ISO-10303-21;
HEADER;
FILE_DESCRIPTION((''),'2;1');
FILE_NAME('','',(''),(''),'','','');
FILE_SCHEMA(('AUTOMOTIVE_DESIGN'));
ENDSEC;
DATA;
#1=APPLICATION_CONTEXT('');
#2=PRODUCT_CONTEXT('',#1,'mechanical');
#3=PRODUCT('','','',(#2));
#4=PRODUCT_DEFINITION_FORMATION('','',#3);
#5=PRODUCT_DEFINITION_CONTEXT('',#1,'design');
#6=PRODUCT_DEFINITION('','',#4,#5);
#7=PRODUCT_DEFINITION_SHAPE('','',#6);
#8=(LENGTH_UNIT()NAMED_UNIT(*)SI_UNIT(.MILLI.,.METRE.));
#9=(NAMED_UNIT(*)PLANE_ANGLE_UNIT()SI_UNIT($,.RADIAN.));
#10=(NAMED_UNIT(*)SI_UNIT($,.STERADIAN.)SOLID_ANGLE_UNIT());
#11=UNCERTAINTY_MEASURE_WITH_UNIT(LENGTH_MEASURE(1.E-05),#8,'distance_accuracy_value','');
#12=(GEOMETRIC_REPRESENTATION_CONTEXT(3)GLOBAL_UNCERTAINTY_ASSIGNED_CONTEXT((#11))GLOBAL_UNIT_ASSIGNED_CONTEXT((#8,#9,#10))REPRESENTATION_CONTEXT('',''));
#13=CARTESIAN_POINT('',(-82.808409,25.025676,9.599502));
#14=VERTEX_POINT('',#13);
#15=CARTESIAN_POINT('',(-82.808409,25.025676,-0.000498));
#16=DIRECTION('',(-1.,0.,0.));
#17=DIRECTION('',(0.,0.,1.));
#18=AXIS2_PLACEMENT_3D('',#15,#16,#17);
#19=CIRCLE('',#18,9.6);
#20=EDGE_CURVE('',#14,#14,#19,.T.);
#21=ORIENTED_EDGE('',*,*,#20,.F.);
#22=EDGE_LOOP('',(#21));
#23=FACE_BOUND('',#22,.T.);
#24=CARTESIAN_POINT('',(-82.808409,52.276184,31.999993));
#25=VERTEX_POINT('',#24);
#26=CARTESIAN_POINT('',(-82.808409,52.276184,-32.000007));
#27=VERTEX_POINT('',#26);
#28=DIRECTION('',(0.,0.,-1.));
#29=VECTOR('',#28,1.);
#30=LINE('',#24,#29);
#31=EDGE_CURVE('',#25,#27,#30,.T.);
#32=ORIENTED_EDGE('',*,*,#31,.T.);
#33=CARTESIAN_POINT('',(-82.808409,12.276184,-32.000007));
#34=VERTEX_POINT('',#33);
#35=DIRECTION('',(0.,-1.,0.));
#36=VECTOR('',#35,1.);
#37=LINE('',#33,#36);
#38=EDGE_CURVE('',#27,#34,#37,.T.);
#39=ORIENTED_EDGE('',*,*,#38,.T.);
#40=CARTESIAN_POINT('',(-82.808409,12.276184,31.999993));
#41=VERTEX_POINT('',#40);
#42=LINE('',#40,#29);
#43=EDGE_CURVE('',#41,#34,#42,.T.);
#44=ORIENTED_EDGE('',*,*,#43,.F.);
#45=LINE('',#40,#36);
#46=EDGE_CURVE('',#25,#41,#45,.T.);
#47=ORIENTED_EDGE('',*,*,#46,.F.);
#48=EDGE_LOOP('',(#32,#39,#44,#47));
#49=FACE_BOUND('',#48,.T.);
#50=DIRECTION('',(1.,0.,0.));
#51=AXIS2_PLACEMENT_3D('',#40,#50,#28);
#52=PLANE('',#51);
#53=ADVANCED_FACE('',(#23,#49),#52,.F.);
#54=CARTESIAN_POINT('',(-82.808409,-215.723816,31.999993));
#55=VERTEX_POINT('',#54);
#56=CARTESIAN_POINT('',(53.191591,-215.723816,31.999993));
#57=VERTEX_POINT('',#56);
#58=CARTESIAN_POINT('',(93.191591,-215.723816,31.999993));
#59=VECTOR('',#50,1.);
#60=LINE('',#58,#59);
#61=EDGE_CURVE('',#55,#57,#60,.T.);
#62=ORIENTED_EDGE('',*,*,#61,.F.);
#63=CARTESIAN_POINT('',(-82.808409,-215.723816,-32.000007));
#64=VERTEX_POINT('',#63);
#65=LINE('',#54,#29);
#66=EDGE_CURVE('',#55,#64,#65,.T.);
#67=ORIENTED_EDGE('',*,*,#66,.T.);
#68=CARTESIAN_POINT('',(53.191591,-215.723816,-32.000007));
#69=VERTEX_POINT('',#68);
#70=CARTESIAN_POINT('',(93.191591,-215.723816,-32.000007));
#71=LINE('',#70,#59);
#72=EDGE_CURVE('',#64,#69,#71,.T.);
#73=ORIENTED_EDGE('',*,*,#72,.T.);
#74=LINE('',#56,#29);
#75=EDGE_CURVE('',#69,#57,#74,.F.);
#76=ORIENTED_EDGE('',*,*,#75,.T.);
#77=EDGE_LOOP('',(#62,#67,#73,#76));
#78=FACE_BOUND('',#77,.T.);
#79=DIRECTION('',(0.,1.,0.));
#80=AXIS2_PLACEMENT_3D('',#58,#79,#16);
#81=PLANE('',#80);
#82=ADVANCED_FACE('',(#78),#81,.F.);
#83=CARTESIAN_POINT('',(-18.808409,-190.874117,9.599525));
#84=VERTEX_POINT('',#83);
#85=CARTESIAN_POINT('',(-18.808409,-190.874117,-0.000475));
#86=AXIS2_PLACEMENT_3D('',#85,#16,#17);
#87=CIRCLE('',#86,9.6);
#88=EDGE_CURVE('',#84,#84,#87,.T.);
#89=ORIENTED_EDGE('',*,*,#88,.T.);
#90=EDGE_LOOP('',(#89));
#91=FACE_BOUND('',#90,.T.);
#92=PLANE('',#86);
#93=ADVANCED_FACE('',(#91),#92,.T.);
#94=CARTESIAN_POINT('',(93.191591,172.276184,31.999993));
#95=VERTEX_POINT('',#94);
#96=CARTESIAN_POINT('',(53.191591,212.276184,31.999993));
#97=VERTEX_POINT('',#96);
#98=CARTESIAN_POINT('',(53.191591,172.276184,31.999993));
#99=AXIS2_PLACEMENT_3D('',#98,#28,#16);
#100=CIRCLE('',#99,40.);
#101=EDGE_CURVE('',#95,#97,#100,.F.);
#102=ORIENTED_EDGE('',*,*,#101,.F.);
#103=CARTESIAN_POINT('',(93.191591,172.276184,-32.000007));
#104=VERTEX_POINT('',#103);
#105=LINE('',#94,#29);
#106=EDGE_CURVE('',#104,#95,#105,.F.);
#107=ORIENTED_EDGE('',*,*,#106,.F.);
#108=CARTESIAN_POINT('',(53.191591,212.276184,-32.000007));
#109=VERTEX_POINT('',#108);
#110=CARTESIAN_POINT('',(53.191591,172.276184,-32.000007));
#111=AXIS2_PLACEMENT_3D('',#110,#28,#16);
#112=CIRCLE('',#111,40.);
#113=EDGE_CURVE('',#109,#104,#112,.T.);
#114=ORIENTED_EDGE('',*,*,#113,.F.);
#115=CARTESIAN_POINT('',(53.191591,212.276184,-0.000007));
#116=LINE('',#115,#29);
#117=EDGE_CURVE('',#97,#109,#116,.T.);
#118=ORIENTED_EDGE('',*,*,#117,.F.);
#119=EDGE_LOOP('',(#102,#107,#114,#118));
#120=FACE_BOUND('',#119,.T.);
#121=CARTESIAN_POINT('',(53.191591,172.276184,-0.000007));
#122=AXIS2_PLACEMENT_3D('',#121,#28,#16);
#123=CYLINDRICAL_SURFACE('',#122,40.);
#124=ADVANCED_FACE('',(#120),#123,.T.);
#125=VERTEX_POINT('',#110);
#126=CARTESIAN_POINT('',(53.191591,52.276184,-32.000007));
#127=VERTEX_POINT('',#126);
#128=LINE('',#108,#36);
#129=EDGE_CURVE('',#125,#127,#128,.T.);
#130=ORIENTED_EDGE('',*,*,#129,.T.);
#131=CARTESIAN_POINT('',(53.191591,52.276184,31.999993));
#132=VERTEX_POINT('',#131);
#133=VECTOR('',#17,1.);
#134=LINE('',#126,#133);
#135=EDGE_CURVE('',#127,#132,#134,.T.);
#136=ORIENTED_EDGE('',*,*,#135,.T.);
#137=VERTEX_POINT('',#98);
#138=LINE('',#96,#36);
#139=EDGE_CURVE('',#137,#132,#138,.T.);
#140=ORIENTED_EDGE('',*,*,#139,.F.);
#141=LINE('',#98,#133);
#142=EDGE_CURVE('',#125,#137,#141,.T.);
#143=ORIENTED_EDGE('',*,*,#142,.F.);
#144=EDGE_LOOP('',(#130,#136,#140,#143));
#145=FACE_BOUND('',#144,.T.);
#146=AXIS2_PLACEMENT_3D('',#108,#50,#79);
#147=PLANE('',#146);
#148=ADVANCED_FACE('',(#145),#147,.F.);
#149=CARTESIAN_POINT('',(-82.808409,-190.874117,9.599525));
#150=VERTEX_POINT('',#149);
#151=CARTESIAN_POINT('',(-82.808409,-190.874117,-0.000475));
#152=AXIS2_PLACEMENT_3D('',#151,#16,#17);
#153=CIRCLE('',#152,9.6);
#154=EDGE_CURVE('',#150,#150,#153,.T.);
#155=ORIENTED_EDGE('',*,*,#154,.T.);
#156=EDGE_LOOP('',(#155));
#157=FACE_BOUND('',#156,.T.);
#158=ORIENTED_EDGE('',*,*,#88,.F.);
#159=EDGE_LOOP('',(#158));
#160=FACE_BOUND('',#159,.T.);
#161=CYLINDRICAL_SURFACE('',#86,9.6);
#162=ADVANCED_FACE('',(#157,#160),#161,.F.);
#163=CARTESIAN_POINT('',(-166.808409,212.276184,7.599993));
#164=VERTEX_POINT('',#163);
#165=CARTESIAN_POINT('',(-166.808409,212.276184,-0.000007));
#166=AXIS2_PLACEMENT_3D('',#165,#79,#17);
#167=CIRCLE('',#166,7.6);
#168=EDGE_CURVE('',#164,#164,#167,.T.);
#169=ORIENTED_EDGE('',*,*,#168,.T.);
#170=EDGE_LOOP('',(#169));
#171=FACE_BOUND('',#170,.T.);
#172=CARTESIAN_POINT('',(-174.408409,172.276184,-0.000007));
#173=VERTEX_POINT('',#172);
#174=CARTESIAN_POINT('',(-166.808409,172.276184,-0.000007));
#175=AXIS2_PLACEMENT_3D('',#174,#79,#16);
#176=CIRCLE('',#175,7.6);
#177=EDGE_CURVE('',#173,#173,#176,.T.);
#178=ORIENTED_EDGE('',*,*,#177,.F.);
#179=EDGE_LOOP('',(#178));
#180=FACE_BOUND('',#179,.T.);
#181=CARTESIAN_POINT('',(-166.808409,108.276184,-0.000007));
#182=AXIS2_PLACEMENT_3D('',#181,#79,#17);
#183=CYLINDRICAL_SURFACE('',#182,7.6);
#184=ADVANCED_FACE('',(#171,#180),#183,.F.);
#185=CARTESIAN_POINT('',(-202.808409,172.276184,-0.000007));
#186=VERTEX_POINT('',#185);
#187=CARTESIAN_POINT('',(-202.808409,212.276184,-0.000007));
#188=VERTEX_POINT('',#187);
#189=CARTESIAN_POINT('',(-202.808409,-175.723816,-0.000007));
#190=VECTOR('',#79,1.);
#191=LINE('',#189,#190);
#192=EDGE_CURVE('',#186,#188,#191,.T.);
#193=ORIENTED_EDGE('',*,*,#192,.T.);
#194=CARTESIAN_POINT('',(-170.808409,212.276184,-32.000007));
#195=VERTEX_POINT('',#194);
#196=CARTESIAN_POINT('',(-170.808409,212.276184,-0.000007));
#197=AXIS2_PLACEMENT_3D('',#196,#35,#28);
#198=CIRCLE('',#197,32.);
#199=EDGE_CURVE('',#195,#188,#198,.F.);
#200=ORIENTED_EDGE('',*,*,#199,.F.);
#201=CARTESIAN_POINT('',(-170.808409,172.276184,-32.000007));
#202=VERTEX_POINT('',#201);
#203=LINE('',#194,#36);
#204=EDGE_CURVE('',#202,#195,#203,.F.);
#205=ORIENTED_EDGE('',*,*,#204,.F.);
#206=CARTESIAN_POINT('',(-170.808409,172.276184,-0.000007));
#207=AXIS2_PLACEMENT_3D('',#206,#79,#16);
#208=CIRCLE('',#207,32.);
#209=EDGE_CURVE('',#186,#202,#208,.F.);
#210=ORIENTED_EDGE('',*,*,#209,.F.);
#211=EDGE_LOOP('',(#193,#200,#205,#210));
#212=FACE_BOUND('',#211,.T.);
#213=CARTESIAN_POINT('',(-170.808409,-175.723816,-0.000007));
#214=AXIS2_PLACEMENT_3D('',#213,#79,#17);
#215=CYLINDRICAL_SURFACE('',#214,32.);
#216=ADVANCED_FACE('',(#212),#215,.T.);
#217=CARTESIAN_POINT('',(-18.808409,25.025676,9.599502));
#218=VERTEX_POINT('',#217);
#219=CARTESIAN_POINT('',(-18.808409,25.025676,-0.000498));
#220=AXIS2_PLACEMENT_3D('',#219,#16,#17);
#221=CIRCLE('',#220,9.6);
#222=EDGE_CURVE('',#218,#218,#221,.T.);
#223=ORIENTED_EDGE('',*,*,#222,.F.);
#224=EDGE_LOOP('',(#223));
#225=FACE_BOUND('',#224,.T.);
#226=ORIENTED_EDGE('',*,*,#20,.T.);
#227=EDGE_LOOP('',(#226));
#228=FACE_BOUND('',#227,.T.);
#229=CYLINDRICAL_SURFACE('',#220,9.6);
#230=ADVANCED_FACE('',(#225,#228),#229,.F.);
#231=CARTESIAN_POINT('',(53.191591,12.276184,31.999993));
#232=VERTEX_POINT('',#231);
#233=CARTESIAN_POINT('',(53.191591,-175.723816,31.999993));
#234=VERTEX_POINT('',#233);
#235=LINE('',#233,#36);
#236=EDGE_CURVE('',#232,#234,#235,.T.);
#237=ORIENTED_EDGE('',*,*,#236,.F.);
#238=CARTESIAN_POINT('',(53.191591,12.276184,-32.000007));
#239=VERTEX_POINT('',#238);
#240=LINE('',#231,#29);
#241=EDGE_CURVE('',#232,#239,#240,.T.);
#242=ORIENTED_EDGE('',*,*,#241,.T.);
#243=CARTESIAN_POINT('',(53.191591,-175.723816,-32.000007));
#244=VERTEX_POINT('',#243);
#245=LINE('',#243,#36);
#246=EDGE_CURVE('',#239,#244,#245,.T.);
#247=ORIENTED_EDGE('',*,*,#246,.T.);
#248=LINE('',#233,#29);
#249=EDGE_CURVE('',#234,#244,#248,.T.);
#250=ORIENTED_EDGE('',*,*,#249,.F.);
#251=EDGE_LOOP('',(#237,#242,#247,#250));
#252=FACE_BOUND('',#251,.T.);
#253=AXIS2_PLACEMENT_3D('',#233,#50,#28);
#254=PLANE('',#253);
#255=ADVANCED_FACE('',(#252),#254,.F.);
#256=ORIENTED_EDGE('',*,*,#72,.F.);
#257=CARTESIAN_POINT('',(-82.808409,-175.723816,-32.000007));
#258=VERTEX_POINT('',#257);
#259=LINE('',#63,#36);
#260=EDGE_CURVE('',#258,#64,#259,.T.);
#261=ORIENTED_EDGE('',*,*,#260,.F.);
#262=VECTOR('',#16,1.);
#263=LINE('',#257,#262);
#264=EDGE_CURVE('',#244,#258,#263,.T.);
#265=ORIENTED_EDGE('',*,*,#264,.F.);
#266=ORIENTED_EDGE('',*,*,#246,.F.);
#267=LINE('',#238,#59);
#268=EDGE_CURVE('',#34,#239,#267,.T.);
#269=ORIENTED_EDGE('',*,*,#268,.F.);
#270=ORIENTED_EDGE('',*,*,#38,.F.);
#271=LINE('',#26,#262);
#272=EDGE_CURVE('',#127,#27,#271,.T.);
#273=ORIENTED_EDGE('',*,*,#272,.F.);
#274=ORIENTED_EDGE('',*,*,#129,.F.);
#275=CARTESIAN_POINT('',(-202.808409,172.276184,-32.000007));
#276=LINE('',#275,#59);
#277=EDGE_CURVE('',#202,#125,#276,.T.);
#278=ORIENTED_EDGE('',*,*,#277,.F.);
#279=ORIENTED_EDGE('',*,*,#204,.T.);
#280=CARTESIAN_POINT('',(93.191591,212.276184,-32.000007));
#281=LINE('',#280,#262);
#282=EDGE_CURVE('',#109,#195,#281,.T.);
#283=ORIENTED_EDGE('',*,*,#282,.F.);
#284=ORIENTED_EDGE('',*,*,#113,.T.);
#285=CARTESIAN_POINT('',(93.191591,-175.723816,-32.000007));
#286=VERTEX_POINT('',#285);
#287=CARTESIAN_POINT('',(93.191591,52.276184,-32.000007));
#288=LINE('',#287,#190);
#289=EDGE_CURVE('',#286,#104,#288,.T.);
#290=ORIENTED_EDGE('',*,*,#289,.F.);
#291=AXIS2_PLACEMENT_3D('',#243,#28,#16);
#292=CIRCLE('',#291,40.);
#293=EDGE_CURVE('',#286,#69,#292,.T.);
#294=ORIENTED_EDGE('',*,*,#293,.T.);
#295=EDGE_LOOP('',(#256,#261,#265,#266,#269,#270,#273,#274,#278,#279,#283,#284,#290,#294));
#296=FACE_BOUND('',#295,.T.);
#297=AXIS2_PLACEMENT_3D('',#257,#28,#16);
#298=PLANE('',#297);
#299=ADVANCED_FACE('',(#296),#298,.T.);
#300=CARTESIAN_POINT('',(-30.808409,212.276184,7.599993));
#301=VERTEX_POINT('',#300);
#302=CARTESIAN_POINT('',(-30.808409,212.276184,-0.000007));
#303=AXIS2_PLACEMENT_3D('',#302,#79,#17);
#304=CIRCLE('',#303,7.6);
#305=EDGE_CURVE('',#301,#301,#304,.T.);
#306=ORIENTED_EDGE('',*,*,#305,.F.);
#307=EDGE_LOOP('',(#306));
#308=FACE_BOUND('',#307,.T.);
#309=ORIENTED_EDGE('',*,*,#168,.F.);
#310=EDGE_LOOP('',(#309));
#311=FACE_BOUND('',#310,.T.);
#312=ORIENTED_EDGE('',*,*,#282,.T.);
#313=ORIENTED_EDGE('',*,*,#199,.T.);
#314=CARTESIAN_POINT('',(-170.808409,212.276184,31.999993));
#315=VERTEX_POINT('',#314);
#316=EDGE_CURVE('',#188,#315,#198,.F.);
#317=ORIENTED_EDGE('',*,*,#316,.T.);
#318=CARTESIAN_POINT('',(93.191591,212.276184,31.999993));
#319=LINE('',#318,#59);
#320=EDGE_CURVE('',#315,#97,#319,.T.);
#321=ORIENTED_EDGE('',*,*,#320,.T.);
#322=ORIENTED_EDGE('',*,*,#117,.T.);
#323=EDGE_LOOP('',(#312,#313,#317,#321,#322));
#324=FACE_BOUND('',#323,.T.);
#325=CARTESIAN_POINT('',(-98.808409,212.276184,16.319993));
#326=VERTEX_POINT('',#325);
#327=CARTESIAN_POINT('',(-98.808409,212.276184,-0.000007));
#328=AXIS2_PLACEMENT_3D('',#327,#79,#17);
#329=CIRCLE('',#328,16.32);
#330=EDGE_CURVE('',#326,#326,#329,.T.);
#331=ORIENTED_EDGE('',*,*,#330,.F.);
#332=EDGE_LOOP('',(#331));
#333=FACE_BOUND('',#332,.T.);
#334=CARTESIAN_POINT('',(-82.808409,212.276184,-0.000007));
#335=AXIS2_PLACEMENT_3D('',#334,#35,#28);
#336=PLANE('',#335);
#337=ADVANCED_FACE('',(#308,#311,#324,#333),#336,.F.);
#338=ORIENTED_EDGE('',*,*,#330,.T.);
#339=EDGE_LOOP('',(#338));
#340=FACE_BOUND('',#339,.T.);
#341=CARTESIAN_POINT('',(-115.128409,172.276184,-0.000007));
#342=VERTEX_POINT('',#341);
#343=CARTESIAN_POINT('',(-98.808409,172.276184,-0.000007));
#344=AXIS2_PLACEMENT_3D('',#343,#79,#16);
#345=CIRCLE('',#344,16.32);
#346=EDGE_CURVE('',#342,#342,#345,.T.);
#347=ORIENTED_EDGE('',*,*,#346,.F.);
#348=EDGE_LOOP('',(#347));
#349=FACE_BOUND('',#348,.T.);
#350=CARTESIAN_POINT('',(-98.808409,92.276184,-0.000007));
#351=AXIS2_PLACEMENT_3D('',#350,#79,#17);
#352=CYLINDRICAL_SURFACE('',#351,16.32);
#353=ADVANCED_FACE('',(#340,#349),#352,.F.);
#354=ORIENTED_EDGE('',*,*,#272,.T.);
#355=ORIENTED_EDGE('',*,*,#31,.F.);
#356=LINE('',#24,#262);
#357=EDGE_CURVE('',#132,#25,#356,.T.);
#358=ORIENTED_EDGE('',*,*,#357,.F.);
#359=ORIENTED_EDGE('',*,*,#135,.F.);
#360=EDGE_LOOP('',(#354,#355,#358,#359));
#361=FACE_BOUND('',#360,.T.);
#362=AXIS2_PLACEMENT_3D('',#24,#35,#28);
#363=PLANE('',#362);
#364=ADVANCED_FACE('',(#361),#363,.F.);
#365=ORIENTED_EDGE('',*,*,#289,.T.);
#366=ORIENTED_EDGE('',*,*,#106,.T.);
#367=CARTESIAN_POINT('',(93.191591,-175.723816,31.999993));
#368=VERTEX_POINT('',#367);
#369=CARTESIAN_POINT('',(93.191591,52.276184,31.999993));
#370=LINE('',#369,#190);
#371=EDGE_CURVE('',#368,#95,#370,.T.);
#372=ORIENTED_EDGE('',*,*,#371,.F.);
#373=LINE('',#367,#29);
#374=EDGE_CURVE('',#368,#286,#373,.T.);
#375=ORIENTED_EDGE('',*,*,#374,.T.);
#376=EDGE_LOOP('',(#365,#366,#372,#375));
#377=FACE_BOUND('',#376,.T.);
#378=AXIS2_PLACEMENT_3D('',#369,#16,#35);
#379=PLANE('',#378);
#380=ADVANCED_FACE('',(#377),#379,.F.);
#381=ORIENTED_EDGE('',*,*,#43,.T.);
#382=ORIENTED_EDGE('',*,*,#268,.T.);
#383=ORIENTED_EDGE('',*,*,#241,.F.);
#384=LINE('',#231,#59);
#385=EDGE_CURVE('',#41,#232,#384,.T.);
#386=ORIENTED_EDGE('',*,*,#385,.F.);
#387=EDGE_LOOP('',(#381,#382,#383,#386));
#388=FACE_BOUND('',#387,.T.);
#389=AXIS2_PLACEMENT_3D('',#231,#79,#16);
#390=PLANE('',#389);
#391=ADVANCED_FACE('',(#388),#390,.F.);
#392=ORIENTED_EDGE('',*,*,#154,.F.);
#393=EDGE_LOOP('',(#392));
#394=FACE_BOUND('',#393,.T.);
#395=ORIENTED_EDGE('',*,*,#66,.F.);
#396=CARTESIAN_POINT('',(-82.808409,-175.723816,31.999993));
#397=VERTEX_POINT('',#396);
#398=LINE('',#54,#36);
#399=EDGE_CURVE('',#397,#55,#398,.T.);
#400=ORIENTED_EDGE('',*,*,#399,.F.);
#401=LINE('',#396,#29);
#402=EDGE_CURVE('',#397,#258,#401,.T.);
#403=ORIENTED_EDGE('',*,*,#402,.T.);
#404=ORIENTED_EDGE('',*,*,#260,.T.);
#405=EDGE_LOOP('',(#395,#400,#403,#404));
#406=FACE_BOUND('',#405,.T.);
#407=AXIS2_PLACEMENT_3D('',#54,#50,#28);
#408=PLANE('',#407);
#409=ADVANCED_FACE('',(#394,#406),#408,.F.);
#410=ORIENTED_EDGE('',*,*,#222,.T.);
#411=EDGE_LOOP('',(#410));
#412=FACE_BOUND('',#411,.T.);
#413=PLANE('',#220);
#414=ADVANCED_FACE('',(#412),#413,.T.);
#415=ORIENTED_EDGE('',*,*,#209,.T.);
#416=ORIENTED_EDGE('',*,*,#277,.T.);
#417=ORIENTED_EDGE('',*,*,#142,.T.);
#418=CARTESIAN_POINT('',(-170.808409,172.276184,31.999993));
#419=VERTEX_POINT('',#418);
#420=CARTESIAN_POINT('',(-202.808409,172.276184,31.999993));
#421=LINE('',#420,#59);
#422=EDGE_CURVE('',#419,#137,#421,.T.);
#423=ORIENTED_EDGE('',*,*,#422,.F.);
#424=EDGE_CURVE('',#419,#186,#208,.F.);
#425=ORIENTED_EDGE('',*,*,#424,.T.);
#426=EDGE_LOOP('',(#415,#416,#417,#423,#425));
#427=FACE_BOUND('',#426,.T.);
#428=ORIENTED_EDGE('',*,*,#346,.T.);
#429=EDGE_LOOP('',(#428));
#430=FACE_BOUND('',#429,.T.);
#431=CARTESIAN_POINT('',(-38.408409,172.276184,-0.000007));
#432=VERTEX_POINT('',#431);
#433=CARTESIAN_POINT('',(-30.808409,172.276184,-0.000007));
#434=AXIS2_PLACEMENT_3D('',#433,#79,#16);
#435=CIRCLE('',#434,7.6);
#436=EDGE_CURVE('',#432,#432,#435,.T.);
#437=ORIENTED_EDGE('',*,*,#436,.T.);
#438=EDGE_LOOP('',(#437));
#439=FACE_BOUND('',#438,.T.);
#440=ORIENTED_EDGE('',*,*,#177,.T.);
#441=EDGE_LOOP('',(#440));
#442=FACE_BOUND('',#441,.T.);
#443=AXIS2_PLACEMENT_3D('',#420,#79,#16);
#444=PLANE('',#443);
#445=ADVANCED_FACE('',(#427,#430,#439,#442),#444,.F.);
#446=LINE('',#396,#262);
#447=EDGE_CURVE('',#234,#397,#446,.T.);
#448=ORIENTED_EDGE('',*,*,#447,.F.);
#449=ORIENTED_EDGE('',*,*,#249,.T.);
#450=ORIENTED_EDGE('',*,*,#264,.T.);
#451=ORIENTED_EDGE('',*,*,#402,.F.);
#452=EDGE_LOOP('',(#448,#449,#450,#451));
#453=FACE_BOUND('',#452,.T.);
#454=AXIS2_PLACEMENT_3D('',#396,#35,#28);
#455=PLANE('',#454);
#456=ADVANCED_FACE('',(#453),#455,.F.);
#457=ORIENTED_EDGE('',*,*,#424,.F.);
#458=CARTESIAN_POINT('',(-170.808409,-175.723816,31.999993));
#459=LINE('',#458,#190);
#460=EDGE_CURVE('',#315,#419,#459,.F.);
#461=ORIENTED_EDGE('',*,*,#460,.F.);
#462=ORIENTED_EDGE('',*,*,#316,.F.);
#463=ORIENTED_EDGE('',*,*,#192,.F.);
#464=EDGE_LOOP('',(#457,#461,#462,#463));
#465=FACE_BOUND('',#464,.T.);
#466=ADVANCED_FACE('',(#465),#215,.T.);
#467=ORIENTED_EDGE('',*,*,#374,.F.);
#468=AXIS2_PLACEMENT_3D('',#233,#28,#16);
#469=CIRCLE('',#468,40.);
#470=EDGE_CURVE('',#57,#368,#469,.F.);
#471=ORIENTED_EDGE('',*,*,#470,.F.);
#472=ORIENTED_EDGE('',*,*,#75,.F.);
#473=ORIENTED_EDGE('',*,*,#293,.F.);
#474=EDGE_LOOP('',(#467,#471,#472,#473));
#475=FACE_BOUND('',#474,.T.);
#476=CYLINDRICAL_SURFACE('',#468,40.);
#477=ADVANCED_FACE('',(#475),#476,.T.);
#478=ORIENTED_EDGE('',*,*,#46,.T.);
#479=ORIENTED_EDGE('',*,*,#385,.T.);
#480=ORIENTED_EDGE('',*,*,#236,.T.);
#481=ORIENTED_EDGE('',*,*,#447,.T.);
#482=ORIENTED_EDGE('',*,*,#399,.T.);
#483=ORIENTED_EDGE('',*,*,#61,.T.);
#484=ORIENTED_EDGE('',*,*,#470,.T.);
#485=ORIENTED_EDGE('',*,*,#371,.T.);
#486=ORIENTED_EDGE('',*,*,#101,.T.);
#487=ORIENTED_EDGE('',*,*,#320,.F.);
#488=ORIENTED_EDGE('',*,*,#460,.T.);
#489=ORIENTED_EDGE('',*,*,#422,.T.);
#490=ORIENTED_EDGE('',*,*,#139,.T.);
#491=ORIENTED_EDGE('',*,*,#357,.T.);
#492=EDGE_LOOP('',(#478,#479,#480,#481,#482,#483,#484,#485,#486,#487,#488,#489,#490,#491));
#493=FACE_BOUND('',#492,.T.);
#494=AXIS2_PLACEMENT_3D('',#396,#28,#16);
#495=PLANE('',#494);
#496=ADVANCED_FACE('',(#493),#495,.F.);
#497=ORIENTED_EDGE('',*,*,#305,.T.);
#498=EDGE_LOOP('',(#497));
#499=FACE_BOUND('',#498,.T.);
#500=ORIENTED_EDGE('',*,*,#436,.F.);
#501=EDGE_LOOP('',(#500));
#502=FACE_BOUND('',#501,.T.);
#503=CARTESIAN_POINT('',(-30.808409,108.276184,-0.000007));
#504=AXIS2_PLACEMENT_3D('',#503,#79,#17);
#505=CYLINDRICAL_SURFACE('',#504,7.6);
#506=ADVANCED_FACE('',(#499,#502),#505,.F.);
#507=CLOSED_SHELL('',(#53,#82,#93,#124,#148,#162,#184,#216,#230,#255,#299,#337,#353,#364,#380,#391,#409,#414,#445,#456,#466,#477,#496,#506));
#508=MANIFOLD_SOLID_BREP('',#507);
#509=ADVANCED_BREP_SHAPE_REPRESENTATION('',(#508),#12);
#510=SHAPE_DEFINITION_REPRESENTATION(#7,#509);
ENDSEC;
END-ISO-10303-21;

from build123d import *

# Parameters (mm, degrees)
P_IDAT_VYSUNUT_M1_DEPTH  = 4
SKICA2_W                 = 5
SKICA2_H                 = 8
P_IDAT_VYSUNUT_M2_DEPTH  = 20
SKICA3_W                 = 8
SKICA3_H                 = 5
P_IDAT_VYSUNUT_M3_DEPTH  = 32
SKICA5_R                 = 2.04
ODEBRAT_VYSUNUT_M1_DEPTH = 15
ZAOBLIT1_R               = 5
SKICA6_R                 = 1.2
ODEBRAT_VYSUNUT_M2_DEPTH = 8
ZAOBLIT2_R               = 4
SKICA7_R                 = 0.95
ODEBRAT_VYSUNUT_M3_DEPTH = 13
SCALE1_SCALE             = 8


with BuildPart() as part:
    # Skica1 → Přidat vysunutím1 (new, symmetric)
    with BuildSketch(Plane.XY):
        Polygon((0, 0), (17, 0), (17, 23.5), (0, 23.5), (0, 28.5), (22, 28.5), (22, -5), (0, -5), align=None)
    extrude(amount=P_IDAT_VYSUNUT_M1_DEPTH, both=True)

    # Skica2 → Přidat vysunutím2 (add)
    with BuildSketch(Plane(origin=(0, 28.5, 0), x_dir=(1, 0, 0), z_dir=(0, 1, 0))):
        with Locations((19.5, 0)):
            Rectangle(SKICA2_W, SKICA2_H)
    extrude(amount=P_IDAT_VYSUNUT_M2_DEPTH)

    # Skica3 → Přidat vysunutím3 (add)
    with BuildSketch(Plane.ZY.offset(-17)):
        with Locations((0, 46)):
            Rectangle(SKICA3_W, SKICA3_H)
    extrude(amount=P_IDAT_VYSUNUT_M3_DEPTH)

    # Skica5 → Odebrat vysunutím1 (cut)
    with BuildSketch(Plane(origin=(0, 48.5, 0), x_dir=(1, 0, 0), z_dir=(0, 1, 0))):
        with Locations(Location((-2, 0, 0), (0, 0, 270))):
            Circle(SKICA5_R)
    extrude(amount=-ODEBRAT_VYSUNUT_M1_DEPTH, mode=Mode.SUBTRACT)

    # Zaoblit1
    zaoblit1_edges = [part.edges().sort_by_distance(p)[0] for p in [
        (22, -5, 0),
        (22, 48.5, 0),
    ]]
    fillet(zaoblit1_edges, radius=ZAOBLIT1_R)

    # Skica6 → Odebrat vysunutím2 (cut)
    with BuildSketch(Plane.ZY):
        with Locations((-6.1415e-05, 25.09368658)):
            Circle(SKICA6_R)
        with Locations((-5.8558e-05, -1.893787552)):
            Circle(SKICA6_R)
    extrude(amount=-ODEBRAT_VYSUNUT_M2_DEPTH, mode=Mode.SUBTRACT)

    # Zaoblit2
    zaoblit2_edges = [part.edges().sort_by_distance(p)[0] for p in [
        (-15, 46, -4),
        (-15, 46, 4),
    ]]
    fillet(zaoblit2_edges, radius=ZAOBLIT2_R - 0.0001)  # a hair under: the kernel refuses the full size

    # Skica7 → Odebrat vysunutím3 (cut)
    with BuildSketch(Plane(origin=(0, 48.5, 0), x_dir=(1, 0, 0), z_dir=(0, 1, 0))):
        with Locations(Location((-10.5, 0, 0), (0, 0, 270))):
            Circle(SKICA7_R)
        with Locations(Location((6.5, 0, 0), (0, 0, 270))):
            Circle(SKICA7_R)
    extrude(amount=-ODEBRAT_VYSUNUT_M3_DEPTH, mode=Mode.SUBTRACT)


with BuildPart() as part_1:
    # Scale1: scaled about (11.829762973, 25.103410302, 9.66e-07)
    add(part.part.scale(SCALE1_SCALE).moved(Location((-82.808340811, -175.723872114, -6.762e-06))))


solid = part_1.part
